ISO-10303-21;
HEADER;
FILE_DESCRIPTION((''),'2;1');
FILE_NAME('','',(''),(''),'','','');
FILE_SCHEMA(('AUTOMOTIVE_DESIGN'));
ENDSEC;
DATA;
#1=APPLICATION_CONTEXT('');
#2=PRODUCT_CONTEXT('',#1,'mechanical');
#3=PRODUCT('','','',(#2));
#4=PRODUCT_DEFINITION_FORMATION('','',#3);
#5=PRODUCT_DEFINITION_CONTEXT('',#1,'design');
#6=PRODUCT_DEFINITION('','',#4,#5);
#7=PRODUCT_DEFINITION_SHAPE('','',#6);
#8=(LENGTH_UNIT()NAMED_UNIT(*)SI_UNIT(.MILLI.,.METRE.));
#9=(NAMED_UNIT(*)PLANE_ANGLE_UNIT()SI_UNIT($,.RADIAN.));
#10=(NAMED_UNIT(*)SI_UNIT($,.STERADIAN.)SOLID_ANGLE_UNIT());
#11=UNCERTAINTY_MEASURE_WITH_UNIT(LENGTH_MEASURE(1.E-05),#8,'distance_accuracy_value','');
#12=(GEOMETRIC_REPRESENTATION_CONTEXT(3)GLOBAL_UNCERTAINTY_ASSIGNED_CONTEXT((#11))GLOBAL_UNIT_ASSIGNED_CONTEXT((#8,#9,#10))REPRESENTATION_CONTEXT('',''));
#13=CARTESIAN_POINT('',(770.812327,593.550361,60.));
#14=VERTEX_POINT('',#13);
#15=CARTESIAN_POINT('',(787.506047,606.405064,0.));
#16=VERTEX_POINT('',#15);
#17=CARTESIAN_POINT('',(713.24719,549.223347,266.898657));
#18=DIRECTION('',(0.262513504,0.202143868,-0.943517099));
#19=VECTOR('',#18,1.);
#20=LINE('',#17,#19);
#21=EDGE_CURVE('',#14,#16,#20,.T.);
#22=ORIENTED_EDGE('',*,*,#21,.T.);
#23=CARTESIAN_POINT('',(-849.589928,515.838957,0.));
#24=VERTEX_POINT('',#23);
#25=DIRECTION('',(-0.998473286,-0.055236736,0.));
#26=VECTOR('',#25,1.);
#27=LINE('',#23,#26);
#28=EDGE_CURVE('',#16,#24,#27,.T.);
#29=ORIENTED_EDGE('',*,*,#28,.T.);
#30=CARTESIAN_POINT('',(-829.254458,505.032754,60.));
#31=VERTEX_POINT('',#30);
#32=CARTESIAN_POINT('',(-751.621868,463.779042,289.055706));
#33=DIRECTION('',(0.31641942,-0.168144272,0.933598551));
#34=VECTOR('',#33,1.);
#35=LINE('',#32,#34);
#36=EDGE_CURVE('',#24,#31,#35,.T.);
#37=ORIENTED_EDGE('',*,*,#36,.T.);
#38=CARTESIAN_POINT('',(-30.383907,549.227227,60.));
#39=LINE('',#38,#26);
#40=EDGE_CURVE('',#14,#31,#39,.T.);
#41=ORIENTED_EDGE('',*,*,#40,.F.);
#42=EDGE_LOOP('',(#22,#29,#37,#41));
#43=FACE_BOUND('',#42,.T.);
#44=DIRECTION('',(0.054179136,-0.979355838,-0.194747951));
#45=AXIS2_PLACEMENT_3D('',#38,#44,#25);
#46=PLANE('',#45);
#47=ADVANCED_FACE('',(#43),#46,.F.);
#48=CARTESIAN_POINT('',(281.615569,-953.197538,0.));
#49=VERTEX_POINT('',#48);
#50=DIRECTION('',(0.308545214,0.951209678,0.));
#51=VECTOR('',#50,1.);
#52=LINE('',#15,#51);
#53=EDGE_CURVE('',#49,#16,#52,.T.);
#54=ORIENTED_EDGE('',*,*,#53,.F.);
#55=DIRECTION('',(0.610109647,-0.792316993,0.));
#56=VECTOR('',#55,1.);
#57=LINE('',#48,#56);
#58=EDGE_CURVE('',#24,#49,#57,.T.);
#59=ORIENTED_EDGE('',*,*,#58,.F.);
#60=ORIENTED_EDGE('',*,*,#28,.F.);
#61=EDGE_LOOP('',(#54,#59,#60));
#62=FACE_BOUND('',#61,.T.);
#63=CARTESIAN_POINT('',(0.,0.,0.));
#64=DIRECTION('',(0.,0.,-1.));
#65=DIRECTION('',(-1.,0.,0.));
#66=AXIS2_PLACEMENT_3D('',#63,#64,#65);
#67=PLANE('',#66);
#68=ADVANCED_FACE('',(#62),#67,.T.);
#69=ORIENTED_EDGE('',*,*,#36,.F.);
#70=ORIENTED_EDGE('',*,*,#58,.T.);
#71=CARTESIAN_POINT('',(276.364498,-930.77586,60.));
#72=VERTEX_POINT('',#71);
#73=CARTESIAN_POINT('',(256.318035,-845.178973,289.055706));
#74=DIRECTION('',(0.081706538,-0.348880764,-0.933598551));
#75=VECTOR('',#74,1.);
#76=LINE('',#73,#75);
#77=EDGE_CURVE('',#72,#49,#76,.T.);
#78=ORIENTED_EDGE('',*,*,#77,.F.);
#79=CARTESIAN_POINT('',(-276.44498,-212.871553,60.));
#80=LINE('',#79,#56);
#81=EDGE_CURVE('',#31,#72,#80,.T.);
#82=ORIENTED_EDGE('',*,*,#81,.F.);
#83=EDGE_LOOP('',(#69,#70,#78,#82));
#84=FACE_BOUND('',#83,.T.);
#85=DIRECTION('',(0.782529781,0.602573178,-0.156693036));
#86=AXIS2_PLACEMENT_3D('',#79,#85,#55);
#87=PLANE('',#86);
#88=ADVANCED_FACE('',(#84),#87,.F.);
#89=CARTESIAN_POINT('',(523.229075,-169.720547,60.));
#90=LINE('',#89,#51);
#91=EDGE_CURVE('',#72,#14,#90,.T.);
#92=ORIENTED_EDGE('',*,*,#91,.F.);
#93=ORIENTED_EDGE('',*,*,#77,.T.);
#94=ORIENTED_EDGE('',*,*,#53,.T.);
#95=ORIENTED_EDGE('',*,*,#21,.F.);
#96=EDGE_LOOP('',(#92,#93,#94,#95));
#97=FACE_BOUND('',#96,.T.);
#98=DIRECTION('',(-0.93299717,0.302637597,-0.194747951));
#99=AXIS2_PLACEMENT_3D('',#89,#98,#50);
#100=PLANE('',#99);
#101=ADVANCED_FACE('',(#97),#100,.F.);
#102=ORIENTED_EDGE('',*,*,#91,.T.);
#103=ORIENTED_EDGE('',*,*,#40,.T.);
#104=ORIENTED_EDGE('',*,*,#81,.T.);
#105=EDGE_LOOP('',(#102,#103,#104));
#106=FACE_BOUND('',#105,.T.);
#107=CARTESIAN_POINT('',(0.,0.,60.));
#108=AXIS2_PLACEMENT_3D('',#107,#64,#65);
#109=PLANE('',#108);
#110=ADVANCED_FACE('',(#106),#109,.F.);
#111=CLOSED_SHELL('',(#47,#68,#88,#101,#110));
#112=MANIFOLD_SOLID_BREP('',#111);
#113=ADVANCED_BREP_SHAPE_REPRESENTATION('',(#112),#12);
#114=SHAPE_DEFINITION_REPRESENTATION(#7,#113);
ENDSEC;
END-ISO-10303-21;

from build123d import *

# Parameters (mm, degrees)
EXTRUDE_1_DEPTH = 60
CHAMFER3_SIZE2  = 11.912970931
CHAMFER3_SIZE   = 60
CHAMFER4_SIZE2  = 11.912970931
CHAMFER4_SIZE   = 60
CHAMFER5_SIZE2  = 9.519169095
CHAMFER5_SIZE   = 60


with BuildPart() as part:
    # Эскиз1 → Бобышка-Вытянуть1 (new body)
    with BuildSketch(Plane.XY):
        Polygon((-849.589927609, 515.838957491), (787.506047005, 606.405063543), (281.615569427, -953.197537878), align=None)
    extrude(amount=EXTRUDE_1_DEPTH)

    # Chamfer3
    chamfer3_edges = [part.edges().sort_by_distance(p)[0] for p in [
        (-31.041940302, 561.122010517, 60),
    ]]
    chamfer3_side = [part.faces().sort_by_distance(p)[0] for p in [
        (-31.041940302, 561.122010517, 59.761740581),
    ]]
    chamfer(chamfer3_edges, length=CHAMFER3_SIZE - 0.0001, length2=CHAMFER3_SIZE2 - 0.0001, reference=chamfer3_side[0])  # a hair under: the kernel refuses the full size

    # Chamfer4
    chamfer4_edges = [part.edges().sort_by_distance(p)[0] for p in [
        (532.590398399, -179.470785737, 60),
    ]]
    chamfer4_side = [part.faces().sort_by_distance(p)[0] for p in [
        (532.590398399, -179.470785737, 59.761740581),
    ]]
    chamfer(chamfer4_edges, length=CHAMFER4_SIZE - 0.0001, length2=CHAMFER4_SIZE2 - 0.0001, reference=chamfer4_side[0])  # a hair under: the kernel refuses the full size

    # Chamfer5
    chamfer5_edges = [part.edges().sort_by_distance(p)[0] for p in [
        (-283.987179091, -218.679290193, 60),
    ]]
    chamfer5_side = [part.faces().sort_by_distance(p)[0] for p in [
        (-283.987179091, -218.679290193, 59.809616618),
    ]]
    chamfer(chamfer5_edges, length=CHAMFER5_SIZE - 0.0001, length2=CHAMFER5_SIZE2 - 0.0001, reference=chamfer5_side[0])  # a hair under: the kernel refuses the full size


solid = part.part
